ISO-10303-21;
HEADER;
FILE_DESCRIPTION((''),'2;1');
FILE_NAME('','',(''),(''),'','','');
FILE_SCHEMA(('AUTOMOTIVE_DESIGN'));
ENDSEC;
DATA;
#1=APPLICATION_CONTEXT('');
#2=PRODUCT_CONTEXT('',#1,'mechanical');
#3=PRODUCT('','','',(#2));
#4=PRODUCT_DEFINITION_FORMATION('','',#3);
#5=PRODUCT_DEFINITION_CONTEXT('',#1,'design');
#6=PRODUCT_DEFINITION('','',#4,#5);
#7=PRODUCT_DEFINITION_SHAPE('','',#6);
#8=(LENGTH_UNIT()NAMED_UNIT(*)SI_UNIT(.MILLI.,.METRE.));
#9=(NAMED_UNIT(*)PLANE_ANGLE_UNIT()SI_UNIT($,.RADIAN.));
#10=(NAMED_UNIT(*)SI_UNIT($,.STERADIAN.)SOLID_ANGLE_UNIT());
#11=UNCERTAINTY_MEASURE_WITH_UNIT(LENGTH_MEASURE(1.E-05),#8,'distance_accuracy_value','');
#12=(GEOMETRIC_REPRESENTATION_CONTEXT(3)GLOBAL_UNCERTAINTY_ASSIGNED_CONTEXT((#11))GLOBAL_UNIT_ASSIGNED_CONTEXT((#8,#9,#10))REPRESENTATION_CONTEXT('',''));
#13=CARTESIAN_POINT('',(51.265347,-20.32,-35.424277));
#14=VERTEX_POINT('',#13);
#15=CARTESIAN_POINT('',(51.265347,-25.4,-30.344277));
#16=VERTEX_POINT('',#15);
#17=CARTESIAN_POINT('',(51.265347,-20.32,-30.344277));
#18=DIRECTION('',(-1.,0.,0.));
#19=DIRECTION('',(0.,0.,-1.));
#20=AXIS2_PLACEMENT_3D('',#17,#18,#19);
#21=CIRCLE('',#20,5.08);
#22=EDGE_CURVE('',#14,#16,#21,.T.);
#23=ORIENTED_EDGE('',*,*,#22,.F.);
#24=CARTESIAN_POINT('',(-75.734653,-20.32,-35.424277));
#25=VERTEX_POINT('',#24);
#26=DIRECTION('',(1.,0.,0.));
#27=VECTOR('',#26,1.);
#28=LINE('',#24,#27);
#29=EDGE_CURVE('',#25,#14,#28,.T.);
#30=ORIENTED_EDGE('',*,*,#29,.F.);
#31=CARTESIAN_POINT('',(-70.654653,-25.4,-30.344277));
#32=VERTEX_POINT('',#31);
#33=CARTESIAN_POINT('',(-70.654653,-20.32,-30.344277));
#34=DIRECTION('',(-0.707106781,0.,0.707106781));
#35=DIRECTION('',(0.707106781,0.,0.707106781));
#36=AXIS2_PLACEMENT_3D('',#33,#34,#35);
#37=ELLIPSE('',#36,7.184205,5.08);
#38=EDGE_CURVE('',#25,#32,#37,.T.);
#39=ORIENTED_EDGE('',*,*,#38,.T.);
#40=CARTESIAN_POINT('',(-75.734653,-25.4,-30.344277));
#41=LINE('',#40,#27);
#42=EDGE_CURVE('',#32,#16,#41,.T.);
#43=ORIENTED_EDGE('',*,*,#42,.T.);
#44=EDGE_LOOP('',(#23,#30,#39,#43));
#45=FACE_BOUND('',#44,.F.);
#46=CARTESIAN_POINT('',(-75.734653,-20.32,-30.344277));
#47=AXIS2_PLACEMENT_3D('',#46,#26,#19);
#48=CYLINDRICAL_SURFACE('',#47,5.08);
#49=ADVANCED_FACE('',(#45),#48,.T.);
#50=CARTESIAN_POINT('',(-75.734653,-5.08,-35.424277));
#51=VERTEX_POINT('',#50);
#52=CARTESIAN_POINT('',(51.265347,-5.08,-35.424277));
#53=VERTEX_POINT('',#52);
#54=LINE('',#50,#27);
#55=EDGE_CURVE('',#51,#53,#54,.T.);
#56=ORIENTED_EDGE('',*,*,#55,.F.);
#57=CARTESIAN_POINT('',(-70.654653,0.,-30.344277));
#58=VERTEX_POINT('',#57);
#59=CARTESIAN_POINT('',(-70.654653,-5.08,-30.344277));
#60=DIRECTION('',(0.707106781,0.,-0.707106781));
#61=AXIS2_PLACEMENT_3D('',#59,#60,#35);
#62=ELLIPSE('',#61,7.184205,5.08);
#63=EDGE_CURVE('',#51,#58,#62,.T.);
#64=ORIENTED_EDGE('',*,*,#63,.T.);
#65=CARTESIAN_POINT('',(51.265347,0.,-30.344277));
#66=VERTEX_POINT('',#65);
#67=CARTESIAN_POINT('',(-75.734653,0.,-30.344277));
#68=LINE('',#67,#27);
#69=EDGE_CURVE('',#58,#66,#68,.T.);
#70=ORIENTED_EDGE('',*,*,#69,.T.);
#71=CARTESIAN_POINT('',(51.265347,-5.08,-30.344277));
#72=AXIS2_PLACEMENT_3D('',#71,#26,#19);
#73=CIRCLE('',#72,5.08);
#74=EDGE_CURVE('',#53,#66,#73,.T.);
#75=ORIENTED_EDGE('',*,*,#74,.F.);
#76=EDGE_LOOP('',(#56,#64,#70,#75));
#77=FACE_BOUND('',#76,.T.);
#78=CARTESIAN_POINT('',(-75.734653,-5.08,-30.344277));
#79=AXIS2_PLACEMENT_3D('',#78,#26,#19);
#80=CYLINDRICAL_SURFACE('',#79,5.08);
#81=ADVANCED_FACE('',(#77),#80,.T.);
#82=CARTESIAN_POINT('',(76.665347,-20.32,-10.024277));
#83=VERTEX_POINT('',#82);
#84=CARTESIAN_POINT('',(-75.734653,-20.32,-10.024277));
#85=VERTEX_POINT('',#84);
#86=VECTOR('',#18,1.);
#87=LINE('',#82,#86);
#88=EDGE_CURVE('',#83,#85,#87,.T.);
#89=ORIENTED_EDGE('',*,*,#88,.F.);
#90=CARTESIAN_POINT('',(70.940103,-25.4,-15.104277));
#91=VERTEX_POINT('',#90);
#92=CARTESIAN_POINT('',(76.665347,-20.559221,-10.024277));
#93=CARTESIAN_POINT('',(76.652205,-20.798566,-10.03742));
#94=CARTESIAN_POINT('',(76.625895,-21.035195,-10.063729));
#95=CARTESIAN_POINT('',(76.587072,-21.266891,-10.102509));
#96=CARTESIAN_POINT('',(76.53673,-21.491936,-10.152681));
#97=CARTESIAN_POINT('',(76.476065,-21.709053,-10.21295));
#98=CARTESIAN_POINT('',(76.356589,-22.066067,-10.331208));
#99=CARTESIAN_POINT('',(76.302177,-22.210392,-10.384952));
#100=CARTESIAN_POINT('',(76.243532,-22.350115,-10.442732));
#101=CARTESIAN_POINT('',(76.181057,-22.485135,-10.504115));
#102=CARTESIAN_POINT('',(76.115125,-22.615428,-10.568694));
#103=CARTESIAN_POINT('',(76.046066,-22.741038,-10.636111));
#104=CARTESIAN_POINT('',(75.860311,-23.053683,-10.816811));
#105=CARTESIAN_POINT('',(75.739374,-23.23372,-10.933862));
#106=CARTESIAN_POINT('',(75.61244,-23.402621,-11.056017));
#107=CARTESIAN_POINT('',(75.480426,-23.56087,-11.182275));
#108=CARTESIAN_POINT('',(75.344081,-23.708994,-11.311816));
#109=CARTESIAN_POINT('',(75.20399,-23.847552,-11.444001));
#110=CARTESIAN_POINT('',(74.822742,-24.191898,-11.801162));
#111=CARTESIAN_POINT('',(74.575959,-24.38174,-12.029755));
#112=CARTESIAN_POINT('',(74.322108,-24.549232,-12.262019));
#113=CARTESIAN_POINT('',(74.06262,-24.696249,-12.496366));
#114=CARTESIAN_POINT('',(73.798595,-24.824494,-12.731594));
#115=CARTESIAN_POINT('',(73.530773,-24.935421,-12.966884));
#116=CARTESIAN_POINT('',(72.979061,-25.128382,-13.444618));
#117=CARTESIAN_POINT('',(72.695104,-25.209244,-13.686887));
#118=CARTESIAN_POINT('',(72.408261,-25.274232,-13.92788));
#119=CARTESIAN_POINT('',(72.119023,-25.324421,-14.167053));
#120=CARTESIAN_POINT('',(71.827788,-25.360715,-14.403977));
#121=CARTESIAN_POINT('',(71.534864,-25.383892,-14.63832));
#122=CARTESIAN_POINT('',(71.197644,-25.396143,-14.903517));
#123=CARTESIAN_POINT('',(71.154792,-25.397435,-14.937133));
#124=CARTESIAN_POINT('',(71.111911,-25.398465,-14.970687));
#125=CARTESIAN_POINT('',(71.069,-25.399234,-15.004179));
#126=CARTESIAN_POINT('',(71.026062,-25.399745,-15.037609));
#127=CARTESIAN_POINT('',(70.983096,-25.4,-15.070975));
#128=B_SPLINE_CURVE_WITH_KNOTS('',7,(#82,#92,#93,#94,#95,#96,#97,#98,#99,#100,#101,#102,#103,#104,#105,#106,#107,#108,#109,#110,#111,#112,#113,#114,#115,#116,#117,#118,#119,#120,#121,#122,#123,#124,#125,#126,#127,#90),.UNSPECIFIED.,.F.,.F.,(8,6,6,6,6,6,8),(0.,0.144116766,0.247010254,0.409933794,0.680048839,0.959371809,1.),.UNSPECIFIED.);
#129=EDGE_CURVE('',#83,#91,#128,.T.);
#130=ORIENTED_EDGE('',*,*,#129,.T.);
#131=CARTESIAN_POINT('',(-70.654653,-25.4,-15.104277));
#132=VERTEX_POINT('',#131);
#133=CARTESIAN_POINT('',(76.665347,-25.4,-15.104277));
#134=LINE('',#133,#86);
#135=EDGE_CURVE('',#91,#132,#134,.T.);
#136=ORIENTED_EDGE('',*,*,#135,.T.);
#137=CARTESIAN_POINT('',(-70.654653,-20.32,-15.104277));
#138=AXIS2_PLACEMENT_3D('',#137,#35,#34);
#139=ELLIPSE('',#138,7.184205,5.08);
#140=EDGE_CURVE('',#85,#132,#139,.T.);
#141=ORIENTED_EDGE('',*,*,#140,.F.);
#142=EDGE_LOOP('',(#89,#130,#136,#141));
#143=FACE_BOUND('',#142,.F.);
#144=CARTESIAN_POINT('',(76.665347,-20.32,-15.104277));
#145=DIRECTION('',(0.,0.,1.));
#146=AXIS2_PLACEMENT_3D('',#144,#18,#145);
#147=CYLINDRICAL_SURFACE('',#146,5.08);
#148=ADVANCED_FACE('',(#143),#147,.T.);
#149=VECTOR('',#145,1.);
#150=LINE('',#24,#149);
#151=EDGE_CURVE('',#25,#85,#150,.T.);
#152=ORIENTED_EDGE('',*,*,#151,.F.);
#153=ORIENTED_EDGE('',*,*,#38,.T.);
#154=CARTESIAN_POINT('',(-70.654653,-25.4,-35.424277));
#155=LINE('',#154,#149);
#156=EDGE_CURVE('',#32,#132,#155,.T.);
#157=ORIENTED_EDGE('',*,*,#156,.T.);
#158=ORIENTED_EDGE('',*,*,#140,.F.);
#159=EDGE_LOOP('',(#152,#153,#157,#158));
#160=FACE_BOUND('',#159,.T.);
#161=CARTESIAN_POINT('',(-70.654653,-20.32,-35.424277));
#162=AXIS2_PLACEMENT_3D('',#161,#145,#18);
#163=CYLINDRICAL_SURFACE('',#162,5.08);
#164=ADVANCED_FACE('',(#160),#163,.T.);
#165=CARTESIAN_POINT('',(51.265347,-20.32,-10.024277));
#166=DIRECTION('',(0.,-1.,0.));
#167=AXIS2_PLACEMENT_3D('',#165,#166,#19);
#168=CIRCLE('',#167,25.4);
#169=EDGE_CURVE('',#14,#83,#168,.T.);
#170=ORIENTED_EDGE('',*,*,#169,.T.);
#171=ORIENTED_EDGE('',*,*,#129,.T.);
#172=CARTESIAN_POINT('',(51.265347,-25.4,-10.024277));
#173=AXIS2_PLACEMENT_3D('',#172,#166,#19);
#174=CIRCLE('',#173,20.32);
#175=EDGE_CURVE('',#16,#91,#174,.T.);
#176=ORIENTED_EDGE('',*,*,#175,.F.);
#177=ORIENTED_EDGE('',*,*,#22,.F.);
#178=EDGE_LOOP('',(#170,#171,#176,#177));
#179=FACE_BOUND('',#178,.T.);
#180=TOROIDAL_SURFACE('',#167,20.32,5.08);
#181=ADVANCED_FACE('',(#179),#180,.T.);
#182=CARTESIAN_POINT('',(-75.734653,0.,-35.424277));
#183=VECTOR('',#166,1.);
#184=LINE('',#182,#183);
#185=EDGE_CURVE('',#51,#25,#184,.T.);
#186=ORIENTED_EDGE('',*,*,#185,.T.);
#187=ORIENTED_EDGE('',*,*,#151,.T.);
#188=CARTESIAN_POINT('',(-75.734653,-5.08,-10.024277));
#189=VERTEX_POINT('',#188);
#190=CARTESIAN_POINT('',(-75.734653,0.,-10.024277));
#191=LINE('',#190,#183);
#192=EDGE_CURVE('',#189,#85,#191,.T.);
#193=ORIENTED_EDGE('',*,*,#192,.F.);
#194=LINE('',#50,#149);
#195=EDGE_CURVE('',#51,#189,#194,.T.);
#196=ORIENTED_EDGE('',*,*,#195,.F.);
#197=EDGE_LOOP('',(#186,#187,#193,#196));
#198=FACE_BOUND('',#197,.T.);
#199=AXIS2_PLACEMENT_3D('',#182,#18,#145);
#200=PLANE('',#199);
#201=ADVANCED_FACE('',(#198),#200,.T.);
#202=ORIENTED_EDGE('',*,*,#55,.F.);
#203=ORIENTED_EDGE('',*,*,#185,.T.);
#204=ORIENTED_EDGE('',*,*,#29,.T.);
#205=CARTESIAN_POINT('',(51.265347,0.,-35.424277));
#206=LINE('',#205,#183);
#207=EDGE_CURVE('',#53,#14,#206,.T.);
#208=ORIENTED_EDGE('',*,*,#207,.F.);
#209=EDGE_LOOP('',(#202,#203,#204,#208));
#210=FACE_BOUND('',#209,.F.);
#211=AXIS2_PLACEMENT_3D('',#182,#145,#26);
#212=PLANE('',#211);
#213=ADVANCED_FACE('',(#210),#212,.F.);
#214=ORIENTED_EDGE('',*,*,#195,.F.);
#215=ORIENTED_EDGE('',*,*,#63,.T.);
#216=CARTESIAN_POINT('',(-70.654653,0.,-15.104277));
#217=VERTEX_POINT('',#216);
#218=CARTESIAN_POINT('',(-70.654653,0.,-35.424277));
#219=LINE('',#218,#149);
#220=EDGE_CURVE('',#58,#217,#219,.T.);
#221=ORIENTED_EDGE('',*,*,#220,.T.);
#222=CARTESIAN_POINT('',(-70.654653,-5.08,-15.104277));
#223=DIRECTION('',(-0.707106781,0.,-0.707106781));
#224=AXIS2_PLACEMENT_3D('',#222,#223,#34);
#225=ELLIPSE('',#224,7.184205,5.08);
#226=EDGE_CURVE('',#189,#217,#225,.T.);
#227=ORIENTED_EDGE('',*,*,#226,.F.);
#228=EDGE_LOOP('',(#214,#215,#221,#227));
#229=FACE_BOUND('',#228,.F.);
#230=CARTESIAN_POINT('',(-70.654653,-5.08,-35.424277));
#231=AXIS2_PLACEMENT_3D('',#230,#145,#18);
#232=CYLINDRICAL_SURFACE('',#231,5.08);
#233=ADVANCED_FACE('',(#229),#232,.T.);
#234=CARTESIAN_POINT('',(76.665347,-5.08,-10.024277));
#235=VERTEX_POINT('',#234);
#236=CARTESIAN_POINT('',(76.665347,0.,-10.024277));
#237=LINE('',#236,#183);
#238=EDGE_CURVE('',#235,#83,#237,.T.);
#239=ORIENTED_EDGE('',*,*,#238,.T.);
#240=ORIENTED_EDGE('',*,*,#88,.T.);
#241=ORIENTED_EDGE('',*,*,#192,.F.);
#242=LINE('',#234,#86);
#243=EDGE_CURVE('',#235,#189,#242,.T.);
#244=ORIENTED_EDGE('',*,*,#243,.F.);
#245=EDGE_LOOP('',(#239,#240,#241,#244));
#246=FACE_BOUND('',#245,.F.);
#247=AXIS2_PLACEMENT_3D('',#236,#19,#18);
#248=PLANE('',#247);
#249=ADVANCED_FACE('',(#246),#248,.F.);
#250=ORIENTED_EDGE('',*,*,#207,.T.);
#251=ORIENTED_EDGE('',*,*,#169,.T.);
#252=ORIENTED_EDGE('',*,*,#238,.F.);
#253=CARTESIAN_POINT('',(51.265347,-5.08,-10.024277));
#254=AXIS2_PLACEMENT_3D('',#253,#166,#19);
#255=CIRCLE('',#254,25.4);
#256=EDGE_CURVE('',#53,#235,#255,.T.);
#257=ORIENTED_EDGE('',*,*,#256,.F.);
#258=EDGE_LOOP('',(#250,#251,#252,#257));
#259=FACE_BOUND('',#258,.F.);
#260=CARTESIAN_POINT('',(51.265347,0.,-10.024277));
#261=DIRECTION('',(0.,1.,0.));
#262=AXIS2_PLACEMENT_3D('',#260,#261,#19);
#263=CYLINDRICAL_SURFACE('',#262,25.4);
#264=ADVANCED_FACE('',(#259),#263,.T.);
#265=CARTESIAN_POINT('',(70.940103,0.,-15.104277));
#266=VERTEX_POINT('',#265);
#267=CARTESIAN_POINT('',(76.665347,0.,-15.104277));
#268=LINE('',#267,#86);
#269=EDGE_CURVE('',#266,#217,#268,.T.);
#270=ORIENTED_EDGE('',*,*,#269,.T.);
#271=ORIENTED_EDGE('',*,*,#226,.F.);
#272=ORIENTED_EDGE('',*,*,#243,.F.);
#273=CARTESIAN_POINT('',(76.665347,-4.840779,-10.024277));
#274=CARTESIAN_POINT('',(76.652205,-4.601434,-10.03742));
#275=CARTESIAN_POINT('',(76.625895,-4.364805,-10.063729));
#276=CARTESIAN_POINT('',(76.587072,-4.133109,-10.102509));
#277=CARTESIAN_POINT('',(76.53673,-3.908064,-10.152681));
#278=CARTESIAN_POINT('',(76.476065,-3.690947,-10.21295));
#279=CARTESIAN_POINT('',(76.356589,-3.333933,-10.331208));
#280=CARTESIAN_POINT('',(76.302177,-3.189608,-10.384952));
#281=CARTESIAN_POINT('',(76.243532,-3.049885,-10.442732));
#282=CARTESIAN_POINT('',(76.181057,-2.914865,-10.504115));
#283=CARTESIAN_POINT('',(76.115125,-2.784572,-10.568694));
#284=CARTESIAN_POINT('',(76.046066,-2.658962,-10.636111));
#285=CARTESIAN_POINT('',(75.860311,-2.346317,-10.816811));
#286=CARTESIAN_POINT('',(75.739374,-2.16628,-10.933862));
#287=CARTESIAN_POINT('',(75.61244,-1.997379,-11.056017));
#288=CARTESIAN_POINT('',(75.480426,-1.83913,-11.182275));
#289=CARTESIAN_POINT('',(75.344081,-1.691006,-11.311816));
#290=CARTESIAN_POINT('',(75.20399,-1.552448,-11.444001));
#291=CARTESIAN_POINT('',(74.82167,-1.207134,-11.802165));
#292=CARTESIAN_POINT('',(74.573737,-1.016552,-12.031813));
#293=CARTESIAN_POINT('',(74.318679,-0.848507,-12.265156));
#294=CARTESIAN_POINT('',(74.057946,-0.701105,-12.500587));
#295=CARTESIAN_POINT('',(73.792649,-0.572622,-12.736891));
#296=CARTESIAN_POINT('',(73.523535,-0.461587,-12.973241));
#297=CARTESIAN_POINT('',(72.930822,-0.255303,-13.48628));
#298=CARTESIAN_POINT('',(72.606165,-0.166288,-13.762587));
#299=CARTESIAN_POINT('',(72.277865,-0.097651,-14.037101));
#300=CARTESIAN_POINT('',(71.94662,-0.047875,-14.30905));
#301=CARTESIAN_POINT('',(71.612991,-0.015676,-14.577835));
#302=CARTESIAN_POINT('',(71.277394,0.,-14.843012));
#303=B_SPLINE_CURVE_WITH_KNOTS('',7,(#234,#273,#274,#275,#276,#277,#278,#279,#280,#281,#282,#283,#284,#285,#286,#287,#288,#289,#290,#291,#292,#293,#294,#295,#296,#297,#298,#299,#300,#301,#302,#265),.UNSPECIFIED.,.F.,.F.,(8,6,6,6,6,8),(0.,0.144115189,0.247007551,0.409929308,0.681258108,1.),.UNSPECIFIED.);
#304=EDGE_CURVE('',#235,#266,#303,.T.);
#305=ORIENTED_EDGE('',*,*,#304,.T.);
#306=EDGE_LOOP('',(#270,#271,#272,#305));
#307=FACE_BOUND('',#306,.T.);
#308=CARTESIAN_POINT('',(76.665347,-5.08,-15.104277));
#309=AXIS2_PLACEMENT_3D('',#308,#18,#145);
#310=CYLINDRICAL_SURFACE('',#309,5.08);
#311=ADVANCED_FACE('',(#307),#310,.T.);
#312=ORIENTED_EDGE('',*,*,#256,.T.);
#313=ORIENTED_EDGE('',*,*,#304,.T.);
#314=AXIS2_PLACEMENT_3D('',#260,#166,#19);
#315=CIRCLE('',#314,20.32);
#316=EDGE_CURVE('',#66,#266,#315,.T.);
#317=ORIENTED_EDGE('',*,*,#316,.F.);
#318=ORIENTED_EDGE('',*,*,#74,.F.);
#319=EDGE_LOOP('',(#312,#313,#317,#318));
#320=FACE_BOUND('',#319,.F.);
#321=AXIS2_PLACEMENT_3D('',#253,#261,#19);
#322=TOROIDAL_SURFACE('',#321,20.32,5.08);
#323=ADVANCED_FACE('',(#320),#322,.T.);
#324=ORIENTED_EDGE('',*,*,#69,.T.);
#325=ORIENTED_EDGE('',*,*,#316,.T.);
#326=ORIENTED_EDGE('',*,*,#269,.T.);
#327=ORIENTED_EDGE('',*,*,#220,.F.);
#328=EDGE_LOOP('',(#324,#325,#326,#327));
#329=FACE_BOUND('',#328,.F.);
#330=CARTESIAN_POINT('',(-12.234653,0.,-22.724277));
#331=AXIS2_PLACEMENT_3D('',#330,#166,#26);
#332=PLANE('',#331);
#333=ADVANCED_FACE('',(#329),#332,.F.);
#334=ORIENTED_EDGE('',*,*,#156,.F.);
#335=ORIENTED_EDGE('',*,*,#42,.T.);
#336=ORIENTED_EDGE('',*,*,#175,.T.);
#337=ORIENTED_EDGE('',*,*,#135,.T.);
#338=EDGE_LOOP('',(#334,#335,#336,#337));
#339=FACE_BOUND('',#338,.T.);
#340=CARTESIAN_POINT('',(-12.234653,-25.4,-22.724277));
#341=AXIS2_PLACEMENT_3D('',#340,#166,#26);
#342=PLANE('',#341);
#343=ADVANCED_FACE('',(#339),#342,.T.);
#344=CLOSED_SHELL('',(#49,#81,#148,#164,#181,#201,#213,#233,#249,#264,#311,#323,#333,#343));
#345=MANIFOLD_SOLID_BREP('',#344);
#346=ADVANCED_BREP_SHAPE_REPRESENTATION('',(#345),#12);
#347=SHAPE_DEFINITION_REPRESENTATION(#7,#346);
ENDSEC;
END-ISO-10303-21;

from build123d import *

# Parameters (mm, degrees)
F0_W     = 127
F0_H     = 25.4
F1_DEPTH = 25.4
F2_R     = 5.08


# Not quite as in the source:
# - a feature names something its author has since deleted; it is built from what else it names


with BuildPart() as f1:
    # F0 (on Front) → F1 (new body)
    with BuildSketch(Plane.XZ):
        with Locations((-12.2346525788, -22.7242771864)):
            Rectangle(F0_W, F0_H)
        with BuildLine():
            Line((76.6653474212, -10.0242771864), (51.2653474212, -10.0242771864))
            Line((51.2653474212, -10.0242771864), (51.2653474212, -35.4242771864))
            ThreePointArc((51.2653474212, -35.4242771864), (69.2258596633, -27.9847894285), (76.6653474212, -10.0242771864))
        make_face()
    extrude(amount=F1_DEPTH)

    # F2
    f2_edges = [f1.edges().sort_by_distance(p)[0] for p in [
        (-75.734653, -25.4, -22.724277),
        (-12.234653, -25.4, -35.424277),
        (69.22586, -25.4, -27.984789),
        (0.465347, -25.4, -10.024277),
        (-75.734653, 0, -22.724277),
        (-12.234653, 0, -35.424277),
        (69.22586, 0, -27.984789),
        (0.465347, 0, -10.024277),
    ]]
    fillet(f2_edges, radius=F2_R)


solid = f1.part
